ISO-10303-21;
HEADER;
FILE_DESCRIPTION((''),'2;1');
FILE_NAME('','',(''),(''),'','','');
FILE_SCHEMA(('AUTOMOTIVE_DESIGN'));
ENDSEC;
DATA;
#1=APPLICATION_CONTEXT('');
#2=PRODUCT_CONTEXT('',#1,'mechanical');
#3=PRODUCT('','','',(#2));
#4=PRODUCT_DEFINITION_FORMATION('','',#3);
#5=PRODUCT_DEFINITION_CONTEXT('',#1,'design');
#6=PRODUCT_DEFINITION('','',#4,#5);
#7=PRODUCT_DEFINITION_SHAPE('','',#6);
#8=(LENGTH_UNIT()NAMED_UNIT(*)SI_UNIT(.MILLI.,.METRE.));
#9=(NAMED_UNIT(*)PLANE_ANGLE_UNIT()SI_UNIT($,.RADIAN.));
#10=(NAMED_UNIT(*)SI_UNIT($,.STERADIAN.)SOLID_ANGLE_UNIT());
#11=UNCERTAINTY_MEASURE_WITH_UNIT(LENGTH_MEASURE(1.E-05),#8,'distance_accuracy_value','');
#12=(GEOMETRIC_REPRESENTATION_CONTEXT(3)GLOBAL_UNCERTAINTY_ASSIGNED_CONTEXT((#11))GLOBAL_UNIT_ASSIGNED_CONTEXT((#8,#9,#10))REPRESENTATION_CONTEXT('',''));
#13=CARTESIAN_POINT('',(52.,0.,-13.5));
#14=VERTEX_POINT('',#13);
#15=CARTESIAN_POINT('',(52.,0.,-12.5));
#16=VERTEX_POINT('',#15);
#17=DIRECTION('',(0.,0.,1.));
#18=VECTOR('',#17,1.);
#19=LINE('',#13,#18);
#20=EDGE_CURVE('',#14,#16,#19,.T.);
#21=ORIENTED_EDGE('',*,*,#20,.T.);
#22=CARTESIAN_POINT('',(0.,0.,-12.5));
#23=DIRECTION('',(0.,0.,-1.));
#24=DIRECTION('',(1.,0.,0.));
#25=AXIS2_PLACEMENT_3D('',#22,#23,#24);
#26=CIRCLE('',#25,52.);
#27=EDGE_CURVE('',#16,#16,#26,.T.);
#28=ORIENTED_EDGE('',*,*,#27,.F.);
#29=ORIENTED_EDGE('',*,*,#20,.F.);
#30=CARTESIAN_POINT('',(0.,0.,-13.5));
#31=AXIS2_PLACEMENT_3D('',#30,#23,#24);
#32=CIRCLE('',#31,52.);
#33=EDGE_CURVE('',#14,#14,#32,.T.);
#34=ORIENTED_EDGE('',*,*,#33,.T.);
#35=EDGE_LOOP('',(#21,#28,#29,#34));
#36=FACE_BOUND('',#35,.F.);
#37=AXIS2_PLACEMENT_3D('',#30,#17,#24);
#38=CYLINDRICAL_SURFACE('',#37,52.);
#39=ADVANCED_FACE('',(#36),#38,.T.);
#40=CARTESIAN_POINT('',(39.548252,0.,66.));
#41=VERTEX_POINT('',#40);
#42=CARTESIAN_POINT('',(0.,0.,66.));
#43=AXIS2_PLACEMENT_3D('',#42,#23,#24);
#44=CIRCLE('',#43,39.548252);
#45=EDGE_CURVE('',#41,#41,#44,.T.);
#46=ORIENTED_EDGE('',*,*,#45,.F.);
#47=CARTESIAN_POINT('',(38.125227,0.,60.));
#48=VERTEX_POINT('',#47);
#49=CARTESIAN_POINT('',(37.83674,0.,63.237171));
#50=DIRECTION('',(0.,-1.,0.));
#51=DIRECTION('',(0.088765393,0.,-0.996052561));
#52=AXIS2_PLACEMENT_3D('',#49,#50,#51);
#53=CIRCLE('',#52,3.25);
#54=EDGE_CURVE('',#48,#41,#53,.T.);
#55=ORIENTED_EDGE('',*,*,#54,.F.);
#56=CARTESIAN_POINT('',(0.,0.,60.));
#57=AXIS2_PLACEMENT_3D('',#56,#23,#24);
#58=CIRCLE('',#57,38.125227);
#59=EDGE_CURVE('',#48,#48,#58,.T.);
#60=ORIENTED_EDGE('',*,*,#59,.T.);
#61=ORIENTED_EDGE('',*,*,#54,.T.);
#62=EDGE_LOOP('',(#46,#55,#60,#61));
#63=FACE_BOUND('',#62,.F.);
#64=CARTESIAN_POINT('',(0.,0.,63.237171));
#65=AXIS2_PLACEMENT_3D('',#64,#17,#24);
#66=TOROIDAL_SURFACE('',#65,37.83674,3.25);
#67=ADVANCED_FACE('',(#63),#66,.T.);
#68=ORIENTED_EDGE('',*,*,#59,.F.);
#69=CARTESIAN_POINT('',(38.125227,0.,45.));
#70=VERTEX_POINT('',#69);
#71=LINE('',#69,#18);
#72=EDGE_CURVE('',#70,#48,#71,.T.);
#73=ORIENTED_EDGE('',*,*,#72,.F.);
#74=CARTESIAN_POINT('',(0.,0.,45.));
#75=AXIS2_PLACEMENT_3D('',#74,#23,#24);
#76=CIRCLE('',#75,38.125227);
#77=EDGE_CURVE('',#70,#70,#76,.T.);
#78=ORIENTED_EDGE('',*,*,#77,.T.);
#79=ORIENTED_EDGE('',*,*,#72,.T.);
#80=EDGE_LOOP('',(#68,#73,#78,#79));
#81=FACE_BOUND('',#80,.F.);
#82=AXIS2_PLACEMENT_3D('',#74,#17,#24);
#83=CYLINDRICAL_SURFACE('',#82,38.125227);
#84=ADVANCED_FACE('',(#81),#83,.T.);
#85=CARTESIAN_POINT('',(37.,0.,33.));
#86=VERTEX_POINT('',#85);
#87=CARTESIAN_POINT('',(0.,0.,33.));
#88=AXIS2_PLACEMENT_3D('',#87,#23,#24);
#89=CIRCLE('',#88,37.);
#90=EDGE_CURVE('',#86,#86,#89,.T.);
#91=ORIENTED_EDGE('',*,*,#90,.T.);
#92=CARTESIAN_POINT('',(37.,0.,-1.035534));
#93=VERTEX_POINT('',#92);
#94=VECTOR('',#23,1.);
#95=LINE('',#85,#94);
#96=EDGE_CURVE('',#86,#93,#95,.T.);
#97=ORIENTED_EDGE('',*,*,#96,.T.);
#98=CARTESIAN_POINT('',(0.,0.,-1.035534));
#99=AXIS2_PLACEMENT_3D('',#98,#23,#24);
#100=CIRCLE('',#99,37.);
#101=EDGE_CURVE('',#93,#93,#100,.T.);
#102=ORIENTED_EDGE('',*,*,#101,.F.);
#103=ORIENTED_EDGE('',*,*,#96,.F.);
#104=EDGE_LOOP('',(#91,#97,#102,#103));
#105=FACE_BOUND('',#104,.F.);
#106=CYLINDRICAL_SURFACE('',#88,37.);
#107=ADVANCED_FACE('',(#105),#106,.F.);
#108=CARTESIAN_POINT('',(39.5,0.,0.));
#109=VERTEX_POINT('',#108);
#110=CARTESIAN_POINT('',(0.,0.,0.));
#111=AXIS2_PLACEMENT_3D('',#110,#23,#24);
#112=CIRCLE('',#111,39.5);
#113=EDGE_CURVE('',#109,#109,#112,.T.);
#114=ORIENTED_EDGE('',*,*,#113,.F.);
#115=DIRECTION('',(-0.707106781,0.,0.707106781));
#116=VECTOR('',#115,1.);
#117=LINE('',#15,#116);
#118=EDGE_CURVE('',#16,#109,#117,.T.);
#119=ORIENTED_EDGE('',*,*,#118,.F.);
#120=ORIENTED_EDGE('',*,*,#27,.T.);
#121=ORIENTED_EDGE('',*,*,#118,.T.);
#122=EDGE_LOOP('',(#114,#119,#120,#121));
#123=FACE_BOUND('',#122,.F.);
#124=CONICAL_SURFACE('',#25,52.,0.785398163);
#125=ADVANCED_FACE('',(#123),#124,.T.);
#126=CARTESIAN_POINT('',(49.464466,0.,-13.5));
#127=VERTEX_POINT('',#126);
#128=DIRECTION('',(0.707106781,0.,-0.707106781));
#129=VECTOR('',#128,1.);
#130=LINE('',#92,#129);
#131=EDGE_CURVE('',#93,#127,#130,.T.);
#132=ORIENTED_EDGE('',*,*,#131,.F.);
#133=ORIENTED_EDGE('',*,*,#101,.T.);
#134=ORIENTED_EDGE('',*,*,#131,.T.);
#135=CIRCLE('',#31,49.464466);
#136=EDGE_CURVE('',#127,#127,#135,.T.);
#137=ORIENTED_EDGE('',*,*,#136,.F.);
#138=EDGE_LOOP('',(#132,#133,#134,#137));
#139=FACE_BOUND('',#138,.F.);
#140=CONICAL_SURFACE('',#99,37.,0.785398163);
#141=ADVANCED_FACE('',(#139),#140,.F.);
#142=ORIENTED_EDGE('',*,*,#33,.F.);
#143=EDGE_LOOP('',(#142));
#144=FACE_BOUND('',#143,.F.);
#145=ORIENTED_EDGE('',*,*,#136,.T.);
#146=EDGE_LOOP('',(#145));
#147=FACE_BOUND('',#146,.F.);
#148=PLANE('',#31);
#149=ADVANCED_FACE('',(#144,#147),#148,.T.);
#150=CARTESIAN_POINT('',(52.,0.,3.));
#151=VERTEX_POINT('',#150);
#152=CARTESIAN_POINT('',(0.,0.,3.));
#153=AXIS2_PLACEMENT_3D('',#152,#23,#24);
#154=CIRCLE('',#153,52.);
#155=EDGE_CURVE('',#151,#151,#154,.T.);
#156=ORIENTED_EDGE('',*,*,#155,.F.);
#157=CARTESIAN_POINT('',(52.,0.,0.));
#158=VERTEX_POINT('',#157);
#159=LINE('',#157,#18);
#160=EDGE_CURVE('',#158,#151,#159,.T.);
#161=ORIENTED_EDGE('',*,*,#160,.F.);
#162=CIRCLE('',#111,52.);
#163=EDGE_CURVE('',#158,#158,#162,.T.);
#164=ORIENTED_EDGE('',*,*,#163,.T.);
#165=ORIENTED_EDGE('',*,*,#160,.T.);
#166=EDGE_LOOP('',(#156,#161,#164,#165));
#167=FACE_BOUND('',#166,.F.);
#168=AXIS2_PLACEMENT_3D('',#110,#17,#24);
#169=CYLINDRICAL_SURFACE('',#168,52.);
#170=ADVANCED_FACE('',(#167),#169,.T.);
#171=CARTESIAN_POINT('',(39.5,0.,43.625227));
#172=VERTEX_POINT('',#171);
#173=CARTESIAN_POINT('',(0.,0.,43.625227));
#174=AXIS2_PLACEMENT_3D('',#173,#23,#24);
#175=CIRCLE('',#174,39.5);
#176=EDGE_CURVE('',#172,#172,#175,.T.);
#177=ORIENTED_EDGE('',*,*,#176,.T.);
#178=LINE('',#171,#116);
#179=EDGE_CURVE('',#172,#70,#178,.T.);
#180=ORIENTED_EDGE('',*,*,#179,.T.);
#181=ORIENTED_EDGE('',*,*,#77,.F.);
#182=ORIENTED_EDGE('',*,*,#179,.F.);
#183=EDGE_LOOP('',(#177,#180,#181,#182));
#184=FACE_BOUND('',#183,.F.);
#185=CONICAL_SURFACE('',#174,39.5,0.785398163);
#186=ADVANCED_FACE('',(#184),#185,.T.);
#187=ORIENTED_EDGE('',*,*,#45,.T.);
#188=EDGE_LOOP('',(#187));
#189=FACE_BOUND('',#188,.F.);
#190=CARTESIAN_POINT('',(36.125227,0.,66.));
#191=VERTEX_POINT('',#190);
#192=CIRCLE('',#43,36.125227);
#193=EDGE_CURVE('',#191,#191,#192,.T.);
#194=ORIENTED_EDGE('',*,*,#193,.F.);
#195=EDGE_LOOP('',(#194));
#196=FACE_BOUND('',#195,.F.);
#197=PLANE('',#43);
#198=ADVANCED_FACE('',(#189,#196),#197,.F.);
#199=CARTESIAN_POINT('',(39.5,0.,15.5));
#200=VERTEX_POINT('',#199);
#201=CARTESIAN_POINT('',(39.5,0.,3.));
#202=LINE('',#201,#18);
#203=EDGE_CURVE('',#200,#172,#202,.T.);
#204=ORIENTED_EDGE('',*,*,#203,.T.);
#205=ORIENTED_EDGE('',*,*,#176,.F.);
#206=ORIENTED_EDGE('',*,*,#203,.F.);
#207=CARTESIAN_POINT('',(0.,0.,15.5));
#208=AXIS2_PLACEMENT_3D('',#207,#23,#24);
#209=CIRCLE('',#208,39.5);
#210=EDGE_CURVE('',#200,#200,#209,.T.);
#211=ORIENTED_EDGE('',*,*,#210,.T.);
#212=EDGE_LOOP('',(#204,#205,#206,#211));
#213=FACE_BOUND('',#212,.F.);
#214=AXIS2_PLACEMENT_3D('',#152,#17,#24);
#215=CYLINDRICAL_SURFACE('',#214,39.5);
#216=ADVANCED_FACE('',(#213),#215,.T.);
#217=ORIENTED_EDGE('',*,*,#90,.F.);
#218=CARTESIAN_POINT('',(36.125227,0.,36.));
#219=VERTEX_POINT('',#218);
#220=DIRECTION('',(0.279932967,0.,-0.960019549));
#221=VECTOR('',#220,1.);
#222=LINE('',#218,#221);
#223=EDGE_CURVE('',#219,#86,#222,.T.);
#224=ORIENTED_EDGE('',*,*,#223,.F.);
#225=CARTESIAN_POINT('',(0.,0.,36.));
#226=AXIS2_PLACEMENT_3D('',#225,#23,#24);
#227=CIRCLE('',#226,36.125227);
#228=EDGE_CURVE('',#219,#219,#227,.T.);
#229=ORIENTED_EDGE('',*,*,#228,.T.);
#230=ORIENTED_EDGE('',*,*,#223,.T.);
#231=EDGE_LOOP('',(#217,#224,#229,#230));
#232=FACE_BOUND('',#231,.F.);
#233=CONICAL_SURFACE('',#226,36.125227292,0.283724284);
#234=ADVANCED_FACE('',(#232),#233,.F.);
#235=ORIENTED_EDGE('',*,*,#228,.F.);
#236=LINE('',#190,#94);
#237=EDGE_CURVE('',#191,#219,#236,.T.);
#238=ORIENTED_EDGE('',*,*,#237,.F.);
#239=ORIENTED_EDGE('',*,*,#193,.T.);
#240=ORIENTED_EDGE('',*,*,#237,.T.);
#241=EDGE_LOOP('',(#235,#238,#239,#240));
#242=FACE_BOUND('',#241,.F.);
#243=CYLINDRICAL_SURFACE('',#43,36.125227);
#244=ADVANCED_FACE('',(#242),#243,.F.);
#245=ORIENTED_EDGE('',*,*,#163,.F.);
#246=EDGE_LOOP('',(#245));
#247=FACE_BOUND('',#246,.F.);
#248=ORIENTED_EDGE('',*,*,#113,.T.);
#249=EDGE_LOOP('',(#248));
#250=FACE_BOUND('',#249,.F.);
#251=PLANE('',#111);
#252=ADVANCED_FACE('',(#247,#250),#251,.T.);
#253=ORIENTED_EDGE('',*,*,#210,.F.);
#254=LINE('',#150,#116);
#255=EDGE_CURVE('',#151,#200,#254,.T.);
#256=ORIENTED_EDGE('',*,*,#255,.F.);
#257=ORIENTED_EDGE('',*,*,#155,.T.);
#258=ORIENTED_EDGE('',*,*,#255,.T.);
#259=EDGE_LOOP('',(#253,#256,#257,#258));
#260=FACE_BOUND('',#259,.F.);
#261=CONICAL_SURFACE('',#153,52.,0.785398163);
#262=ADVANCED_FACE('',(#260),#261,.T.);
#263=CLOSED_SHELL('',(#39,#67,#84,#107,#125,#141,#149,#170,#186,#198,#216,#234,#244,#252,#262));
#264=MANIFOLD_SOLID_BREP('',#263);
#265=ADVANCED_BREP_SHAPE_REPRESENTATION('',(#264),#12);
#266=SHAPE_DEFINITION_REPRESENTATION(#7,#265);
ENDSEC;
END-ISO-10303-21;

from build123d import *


# Not quite as in the source:
# - a feature names something its author has since deleted; it is built from what else it names


with BuildPart() as f1:
    # F0 (on Front) → F1 (revolve)
    with BuildSketch(Plane.XZ):
        with BuildLine():
            Line((52, -12.5), (39.5, 0))
            Line((39.5, 0), (52, 0))
            Line((52, 0), (52, 3))
            Line((52, 3), (39.5, 3))
            Line((39.5, 3), (39.5, 15.5))
            Line((39.5, 15.5), (39.5, 43.6252272915))
            Line((39.5, 43.6252272915), (38.1252272915, 45))
            Line((38.1252272915, 45), (38.1252272915, 60))
            ThreePointArc((38.1252272915, 60), (40.9990174252, 62.4871708245), (39.5482522386, 66))
            Line((39.5482522386, 66), (36.1252272915, 66))
            Line((36.1252272915, 66), (36.1252272915, 36))
            Line((36.1252272915, 36), (37, 33))
            Line((37, 33), (37, -1.0355339059))
            Line((37, -1.0355339059), (49.4644660941, -13.5))
            Line((49.4644660941, -13.5), (52, -13.5))
            Line((52, -13.5), (52, -12.5))
        make_face()
        Polygon((39.5, 3), (52, 3), (39.5, 15.5), align=None)
    revolve(axis=Axis((0, 0, 34.5994567809), (0, 0, -1)))


solid = f1.part
